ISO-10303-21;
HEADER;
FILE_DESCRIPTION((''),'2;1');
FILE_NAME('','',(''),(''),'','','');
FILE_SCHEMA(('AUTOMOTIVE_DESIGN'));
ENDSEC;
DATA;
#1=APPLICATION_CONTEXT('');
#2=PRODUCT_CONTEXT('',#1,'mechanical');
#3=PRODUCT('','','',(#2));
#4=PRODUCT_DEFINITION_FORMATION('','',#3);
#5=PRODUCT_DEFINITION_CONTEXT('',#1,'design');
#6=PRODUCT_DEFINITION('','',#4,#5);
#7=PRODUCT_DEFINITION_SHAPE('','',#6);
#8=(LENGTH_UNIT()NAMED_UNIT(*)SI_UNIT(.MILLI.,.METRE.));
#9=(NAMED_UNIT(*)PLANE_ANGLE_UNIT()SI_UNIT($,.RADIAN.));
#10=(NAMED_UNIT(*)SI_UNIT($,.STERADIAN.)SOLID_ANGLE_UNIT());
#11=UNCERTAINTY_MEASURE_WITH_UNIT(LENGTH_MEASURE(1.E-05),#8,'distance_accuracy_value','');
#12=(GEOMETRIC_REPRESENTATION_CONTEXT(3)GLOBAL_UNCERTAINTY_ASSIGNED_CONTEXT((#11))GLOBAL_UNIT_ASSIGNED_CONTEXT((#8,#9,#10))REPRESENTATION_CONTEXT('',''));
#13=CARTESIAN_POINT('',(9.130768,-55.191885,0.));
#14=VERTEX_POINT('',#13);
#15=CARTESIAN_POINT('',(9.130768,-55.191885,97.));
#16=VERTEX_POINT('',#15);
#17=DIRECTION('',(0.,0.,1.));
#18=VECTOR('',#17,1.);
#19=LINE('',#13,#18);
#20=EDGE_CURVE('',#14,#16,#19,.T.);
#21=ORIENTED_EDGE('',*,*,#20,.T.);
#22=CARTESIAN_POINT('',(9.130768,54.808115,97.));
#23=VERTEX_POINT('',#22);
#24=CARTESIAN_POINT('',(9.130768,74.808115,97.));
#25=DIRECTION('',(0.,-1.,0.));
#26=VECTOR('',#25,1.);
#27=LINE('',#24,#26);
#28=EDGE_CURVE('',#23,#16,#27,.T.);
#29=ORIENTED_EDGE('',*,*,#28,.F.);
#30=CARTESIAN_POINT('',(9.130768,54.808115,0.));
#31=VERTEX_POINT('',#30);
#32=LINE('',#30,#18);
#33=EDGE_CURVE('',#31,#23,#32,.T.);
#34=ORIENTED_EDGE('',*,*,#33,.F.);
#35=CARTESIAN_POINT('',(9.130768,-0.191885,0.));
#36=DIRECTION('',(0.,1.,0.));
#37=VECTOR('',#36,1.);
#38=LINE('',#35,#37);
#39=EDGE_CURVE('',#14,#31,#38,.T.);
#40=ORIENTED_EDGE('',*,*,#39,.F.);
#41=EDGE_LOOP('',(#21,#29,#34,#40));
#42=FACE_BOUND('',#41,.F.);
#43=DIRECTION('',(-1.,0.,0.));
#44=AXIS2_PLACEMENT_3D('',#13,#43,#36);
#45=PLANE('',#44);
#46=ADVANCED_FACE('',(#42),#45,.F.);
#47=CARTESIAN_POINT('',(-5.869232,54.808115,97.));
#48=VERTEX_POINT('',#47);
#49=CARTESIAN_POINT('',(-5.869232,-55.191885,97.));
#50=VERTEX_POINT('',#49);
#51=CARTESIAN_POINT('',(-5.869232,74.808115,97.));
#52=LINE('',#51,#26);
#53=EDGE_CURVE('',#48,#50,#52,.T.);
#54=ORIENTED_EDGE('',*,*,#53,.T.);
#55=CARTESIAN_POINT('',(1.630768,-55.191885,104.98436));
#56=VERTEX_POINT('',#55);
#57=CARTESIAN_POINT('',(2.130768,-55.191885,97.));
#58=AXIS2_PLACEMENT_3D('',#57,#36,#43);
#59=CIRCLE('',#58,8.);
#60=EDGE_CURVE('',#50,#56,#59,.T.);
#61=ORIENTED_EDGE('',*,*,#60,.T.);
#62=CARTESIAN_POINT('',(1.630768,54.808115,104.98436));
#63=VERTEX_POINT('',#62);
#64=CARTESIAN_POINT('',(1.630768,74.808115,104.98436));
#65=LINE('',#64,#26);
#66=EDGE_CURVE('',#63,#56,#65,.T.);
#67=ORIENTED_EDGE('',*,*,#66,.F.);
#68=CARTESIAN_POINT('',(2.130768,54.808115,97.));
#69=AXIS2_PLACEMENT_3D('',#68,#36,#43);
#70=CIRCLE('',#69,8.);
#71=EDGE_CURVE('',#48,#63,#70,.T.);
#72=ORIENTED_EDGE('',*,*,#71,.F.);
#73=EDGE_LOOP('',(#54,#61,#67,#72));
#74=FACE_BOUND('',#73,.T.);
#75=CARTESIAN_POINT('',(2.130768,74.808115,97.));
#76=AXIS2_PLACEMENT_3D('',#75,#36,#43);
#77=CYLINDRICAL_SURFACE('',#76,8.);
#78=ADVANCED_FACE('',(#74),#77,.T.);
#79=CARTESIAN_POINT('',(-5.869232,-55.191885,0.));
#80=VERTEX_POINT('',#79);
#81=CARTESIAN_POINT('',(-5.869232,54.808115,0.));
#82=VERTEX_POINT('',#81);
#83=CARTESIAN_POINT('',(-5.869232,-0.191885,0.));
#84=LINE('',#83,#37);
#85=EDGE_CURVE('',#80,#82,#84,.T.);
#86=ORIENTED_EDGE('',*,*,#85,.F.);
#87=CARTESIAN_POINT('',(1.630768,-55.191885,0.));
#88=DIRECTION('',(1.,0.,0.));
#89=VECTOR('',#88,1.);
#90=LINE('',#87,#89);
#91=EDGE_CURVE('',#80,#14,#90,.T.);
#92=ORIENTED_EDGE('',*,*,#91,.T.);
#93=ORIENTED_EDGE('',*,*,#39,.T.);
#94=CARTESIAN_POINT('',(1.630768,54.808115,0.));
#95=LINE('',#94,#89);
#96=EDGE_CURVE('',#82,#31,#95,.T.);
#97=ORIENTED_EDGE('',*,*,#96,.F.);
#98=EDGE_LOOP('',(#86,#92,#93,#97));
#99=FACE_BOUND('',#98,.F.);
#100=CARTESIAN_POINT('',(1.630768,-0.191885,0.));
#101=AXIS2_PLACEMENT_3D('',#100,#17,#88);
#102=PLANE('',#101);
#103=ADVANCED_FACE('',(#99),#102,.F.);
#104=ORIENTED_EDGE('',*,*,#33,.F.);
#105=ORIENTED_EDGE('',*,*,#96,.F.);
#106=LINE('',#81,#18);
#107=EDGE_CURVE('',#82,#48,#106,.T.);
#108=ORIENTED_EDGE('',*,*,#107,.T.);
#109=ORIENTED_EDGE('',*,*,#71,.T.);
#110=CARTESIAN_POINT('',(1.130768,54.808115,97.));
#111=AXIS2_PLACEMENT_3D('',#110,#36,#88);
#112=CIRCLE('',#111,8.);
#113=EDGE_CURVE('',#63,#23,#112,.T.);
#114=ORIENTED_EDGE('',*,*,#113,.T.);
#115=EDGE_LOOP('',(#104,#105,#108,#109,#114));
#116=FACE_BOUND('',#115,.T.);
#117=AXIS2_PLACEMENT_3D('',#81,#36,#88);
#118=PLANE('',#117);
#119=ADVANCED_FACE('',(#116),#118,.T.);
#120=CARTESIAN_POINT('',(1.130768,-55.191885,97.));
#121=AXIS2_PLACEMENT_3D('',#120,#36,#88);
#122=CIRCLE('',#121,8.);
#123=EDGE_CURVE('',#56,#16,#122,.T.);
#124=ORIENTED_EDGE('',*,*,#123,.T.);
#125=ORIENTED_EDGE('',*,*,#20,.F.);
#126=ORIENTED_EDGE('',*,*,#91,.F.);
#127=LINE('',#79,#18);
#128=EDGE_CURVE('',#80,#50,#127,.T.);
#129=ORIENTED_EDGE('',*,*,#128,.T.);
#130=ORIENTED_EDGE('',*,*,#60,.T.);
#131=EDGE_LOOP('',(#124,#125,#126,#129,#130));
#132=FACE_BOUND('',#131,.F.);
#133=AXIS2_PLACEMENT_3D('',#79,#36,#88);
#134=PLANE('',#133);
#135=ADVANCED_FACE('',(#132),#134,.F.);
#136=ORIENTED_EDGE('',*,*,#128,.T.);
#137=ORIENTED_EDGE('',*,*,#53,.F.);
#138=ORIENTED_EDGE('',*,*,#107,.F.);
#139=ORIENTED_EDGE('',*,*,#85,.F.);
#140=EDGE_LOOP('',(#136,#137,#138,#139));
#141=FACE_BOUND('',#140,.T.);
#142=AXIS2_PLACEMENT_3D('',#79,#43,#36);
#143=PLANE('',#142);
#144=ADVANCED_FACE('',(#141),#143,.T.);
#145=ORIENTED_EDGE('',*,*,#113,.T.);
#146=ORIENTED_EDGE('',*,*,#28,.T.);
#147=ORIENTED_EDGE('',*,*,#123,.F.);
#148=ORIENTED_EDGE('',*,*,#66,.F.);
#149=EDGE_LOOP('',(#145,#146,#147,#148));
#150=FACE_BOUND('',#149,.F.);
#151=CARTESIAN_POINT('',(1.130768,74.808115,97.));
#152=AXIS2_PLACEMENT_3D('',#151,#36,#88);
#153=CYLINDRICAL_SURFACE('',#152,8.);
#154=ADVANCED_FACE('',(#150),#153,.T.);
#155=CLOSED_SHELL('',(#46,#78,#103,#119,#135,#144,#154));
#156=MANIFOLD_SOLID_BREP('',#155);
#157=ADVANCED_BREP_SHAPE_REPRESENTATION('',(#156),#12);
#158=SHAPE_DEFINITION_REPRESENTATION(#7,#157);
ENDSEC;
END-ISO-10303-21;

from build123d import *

# Parameters (mm, degrees)
F0_W        = 15
F0_H        = 110
F1_DEPTH    = 105
F2_T1_DEPTH = 150


# Not quite as in the source:
# - a fillet or chamfer that OpenCascade refuses, or shapes differently, is made with other operations: its cross-section is extruded or revolved along the edge and cut away or added


with BuildPart() as f1:
    # F0 (on Top) → F1 (new body)
    with BuildSketch(Plane.XY):
        with Locations((1.6307681799, -0.1918845651)):
            Rectangle(F0_W, F0_H)
    extrude(amount=F1_DEPTH)

    # F2: fillet of radius 8 on 2 edges, made by hand

    # F2_s2 → F2_t1 (cut)
    with BuildSketch(Plane.XZ.offset(-74.8081154349)):
        with BuildLine():
            ThreePointArc((-5.8692318201, 97), (-3.5260860696, 102.6568542495), (2.1307681799, 105))
            Line((2.1307681799, 105), (-5.8692318201, 105))
            Line((-5.8692318201, 105), (-5.8692318201, 97))
        make_face()
        with BuildLine():
            ThreePointArc((9.1307681799, 97), (6.7876224294, 102.6568542495), (1.1307681799, 105))
            Line((1.1307681799, 105), (9.1307681799, 105))
            Line((9.1307681799, 105), (9.1307681799, 97))
        make_face()
    extrude(amount=F2_T1_DEPTH, mode=Mode.SUBTRACT)


solid = f1.part
